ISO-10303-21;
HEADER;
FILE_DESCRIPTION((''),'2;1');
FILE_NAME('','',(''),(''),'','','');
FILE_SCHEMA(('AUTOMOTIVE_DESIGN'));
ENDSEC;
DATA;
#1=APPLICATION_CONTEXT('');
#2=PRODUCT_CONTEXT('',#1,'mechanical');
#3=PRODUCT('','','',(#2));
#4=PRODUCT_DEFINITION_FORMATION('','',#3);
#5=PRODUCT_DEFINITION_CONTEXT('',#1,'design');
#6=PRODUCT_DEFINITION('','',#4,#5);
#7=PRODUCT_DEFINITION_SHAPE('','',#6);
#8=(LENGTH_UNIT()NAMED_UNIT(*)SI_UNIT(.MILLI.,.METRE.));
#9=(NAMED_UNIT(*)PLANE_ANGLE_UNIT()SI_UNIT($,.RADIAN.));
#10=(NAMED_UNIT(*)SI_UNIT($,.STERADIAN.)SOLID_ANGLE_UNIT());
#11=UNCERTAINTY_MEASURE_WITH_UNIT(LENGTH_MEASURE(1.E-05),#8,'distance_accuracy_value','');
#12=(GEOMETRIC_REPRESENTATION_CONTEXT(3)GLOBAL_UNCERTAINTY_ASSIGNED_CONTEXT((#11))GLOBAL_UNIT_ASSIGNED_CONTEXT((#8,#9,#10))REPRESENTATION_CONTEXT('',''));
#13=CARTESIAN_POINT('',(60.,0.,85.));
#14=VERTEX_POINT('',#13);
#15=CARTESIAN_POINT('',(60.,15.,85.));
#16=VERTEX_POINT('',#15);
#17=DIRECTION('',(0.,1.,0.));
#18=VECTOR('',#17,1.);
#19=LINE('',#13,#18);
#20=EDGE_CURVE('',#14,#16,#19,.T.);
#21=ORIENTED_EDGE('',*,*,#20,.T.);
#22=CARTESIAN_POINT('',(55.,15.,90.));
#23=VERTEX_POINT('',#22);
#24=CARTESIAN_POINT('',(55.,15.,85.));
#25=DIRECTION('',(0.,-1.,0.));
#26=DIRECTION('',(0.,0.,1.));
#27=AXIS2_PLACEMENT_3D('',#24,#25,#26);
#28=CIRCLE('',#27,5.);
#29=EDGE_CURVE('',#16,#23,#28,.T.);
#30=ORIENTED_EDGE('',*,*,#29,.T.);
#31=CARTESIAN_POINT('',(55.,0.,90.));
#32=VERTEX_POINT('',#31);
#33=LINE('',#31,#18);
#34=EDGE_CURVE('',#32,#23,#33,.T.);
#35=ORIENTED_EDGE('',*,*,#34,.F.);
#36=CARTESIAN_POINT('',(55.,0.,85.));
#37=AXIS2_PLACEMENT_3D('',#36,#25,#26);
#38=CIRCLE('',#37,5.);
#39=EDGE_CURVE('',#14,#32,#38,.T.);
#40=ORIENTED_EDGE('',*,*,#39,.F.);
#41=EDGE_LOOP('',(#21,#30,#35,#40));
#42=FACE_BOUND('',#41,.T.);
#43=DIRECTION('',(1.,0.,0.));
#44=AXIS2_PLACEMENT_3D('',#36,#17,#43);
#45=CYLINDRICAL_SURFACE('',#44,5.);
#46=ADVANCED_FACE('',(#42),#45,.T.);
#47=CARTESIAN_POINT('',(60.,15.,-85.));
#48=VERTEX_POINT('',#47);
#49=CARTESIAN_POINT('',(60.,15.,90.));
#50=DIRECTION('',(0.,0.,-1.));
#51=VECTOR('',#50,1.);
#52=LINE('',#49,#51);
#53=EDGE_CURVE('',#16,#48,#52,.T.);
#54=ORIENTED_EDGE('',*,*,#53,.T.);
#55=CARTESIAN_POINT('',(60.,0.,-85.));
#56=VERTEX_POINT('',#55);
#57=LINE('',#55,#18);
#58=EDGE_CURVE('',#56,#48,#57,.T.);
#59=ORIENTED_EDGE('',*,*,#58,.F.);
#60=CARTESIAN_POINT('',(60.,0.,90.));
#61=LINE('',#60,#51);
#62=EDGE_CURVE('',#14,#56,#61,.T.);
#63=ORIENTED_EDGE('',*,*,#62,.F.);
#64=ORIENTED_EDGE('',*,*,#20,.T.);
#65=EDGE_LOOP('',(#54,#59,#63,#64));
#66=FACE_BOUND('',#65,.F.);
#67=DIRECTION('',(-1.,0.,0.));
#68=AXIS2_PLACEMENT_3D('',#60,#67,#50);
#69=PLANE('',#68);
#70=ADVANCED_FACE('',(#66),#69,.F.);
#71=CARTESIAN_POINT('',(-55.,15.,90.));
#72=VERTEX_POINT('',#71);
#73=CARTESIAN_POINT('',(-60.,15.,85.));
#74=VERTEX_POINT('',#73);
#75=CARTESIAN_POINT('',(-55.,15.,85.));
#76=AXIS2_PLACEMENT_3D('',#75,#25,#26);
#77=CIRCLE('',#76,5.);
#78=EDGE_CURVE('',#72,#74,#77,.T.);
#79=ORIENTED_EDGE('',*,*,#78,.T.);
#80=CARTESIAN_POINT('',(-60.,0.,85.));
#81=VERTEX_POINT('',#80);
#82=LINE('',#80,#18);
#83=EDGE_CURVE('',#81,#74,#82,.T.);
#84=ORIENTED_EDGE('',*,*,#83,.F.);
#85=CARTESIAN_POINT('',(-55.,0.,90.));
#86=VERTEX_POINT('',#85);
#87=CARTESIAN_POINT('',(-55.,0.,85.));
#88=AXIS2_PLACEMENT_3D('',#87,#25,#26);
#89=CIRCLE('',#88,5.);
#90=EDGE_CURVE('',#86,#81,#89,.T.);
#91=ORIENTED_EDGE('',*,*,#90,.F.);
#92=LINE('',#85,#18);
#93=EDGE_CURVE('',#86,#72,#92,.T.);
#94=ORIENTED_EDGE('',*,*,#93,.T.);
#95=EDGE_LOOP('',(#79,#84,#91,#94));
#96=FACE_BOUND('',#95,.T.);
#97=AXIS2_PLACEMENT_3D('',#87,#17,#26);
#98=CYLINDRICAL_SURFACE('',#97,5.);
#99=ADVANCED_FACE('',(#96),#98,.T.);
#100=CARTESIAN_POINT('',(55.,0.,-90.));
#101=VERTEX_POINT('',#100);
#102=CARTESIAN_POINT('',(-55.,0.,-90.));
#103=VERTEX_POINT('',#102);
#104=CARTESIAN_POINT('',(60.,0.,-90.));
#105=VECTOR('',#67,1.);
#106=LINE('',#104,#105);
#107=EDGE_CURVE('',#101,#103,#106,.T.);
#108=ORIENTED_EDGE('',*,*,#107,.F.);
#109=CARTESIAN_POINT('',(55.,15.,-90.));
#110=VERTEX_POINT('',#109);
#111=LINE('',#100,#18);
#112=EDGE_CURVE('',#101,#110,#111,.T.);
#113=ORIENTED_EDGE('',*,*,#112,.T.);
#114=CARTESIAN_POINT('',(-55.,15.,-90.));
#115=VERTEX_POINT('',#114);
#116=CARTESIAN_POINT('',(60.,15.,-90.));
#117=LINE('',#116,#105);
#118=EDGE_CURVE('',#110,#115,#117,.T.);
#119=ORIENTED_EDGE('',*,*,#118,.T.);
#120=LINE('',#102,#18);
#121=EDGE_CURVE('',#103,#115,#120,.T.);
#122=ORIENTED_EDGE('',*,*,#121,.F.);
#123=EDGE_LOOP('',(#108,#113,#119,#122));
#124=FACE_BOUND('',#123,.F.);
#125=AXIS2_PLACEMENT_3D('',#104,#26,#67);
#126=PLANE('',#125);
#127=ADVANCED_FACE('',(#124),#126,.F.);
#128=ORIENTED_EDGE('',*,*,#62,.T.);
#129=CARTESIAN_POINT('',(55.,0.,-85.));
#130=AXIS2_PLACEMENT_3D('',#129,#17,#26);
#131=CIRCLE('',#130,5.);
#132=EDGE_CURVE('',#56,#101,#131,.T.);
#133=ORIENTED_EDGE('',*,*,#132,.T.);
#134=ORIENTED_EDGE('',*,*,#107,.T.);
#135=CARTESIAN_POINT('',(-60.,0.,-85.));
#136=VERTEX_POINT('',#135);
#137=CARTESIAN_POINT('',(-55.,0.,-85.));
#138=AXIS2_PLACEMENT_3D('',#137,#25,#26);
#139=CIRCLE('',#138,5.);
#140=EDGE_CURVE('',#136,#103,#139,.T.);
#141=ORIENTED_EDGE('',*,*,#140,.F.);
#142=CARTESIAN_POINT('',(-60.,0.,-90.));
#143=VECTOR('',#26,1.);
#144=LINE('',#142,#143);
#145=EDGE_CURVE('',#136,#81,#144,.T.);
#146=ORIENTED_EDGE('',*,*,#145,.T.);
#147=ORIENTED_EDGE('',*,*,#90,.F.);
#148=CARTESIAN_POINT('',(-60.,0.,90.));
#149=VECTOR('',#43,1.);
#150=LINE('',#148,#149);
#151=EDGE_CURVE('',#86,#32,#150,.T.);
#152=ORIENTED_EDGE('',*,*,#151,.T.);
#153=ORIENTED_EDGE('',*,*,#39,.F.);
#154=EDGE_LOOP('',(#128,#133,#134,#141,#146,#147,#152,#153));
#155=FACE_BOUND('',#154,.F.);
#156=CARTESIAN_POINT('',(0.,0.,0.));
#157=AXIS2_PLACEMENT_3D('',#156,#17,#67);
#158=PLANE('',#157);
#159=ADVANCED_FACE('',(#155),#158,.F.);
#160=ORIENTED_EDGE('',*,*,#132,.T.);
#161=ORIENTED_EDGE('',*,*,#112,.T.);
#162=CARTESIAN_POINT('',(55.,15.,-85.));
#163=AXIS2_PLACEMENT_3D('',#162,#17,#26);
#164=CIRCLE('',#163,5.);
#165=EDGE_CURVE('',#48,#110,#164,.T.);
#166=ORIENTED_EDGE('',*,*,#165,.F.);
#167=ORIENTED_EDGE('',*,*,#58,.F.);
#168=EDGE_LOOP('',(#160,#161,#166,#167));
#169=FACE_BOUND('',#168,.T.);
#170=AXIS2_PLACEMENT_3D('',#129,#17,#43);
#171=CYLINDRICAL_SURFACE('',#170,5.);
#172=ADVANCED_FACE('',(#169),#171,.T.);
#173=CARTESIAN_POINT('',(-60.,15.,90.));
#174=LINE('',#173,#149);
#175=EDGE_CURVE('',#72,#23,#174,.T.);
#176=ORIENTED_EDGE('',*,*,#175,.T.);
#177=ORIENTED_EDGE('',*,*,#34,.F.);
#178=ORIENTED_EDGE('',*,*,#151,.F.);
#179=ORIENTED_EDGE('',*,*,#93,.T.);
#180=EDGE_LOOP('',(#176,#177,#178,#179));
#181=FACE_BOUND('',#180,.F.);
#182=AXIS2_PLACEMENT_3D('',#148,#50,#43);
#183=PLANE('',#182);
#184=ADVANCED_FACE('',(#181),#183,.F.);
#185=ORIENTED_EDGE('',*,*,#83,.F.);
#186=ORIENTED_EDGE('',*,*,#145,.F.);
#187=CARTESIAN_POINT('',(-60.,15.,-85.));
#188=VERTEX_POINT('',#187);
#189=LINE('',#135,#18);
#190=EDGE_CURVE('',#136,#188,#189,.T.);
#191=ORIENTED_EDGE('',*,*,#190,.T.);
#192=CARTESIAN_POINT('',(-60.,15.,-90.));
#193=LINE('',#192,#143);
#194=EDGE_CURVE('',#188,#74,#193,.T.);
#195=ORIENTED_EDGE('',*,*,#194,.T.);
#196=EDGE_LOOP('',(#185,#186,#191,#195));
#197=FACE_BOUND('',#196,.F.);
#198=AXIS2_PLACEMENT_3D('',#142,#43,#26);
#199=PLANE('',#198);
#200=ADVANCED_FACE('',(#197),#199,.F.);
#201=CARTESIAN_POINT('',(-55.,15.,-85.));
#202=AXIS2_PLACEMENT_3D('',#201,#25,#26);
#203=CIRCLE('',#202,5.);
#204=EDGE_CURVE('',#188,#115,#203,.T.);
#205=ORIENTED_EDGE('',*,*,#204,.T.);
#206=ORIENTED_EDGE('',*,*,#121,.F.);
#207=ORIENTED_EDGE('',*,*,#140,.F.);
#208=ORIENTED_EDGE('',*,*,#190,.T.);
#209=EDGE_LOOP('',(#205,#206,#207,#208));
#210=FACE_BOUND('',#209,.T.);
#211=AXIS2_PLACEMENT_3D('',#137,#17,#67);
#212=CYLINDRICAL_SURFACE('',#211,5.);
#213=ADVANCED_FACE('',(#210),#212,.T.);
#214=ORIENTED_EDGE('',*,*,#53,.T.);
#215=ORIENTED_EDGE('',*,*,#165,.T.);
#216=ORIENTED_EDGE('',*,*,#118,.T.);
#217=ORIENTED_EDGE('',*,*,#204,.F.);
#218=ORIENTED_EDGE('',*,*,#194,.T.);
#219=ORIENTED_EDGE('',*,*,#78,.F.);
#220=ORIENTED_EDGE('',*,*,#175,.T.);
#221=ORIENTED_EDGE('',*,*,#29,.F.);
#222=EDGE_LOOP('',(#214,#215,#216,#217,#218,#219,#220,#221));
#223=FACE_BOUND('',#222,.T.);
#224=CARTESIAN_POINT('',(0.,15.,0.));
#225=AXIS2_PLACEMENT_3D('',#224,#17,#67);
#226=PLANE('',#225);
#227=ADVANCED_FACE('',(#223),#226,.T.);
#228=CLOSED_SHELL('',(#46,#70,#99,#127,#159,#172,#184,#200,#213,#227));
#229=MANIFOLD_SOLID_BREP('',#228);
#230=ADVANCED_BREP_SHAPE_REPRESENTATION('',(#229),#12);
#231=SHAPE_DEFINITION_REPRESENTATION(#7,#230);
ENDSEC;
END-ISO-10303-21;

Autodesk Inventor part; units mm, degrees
ref_plane "YZ Plane" through (0, 0, 0) normal (1, 0, 0) x (0, 1, 0)
ref_plane "XZ Plane" through (0, 0, 0) normal (0, 1, 0) x (-1, 0, 0)
ref_plane "XY Plane" through (0, 0, 0) normal (0, 0, 1) x (1, 0, 0)
sketch "Sketch1" plane through (0, 0, 0) normal (0, 1, 0) x (-1, 0, 0)
  line L0 (60, 90) -> (-60, 90)
  line L1 (-60, 90) -> (-60, -90)
  line L2 (-60, -90) -> (60, -90)
  line L3 (60, -90) -> (60, 90)
  line L4 (60, 90) -> (-60, -90) construction
  line L5 (-60, 90) -> (60, -90) construction
  point P0 (0, 0)
  dimension "d0" = 120
  dimension "d1" = 180
extrude "Extrusion1" add sketch "Sketch1" along normal blind 15
fillet "Face Fillet1" radius 5 1 edges at (60, 7.5, 90)
fillet "Face Fillet2" radius 5 1 edges at (60, 7.5, -90)
fillet "Face Fillet3" radius 5 1 edges at (-60, 7.5, 90)
fillet "Face Fillet4" radius 5 1 edges at (-60, 7.5, -90)
properties part number "wheel_part"
